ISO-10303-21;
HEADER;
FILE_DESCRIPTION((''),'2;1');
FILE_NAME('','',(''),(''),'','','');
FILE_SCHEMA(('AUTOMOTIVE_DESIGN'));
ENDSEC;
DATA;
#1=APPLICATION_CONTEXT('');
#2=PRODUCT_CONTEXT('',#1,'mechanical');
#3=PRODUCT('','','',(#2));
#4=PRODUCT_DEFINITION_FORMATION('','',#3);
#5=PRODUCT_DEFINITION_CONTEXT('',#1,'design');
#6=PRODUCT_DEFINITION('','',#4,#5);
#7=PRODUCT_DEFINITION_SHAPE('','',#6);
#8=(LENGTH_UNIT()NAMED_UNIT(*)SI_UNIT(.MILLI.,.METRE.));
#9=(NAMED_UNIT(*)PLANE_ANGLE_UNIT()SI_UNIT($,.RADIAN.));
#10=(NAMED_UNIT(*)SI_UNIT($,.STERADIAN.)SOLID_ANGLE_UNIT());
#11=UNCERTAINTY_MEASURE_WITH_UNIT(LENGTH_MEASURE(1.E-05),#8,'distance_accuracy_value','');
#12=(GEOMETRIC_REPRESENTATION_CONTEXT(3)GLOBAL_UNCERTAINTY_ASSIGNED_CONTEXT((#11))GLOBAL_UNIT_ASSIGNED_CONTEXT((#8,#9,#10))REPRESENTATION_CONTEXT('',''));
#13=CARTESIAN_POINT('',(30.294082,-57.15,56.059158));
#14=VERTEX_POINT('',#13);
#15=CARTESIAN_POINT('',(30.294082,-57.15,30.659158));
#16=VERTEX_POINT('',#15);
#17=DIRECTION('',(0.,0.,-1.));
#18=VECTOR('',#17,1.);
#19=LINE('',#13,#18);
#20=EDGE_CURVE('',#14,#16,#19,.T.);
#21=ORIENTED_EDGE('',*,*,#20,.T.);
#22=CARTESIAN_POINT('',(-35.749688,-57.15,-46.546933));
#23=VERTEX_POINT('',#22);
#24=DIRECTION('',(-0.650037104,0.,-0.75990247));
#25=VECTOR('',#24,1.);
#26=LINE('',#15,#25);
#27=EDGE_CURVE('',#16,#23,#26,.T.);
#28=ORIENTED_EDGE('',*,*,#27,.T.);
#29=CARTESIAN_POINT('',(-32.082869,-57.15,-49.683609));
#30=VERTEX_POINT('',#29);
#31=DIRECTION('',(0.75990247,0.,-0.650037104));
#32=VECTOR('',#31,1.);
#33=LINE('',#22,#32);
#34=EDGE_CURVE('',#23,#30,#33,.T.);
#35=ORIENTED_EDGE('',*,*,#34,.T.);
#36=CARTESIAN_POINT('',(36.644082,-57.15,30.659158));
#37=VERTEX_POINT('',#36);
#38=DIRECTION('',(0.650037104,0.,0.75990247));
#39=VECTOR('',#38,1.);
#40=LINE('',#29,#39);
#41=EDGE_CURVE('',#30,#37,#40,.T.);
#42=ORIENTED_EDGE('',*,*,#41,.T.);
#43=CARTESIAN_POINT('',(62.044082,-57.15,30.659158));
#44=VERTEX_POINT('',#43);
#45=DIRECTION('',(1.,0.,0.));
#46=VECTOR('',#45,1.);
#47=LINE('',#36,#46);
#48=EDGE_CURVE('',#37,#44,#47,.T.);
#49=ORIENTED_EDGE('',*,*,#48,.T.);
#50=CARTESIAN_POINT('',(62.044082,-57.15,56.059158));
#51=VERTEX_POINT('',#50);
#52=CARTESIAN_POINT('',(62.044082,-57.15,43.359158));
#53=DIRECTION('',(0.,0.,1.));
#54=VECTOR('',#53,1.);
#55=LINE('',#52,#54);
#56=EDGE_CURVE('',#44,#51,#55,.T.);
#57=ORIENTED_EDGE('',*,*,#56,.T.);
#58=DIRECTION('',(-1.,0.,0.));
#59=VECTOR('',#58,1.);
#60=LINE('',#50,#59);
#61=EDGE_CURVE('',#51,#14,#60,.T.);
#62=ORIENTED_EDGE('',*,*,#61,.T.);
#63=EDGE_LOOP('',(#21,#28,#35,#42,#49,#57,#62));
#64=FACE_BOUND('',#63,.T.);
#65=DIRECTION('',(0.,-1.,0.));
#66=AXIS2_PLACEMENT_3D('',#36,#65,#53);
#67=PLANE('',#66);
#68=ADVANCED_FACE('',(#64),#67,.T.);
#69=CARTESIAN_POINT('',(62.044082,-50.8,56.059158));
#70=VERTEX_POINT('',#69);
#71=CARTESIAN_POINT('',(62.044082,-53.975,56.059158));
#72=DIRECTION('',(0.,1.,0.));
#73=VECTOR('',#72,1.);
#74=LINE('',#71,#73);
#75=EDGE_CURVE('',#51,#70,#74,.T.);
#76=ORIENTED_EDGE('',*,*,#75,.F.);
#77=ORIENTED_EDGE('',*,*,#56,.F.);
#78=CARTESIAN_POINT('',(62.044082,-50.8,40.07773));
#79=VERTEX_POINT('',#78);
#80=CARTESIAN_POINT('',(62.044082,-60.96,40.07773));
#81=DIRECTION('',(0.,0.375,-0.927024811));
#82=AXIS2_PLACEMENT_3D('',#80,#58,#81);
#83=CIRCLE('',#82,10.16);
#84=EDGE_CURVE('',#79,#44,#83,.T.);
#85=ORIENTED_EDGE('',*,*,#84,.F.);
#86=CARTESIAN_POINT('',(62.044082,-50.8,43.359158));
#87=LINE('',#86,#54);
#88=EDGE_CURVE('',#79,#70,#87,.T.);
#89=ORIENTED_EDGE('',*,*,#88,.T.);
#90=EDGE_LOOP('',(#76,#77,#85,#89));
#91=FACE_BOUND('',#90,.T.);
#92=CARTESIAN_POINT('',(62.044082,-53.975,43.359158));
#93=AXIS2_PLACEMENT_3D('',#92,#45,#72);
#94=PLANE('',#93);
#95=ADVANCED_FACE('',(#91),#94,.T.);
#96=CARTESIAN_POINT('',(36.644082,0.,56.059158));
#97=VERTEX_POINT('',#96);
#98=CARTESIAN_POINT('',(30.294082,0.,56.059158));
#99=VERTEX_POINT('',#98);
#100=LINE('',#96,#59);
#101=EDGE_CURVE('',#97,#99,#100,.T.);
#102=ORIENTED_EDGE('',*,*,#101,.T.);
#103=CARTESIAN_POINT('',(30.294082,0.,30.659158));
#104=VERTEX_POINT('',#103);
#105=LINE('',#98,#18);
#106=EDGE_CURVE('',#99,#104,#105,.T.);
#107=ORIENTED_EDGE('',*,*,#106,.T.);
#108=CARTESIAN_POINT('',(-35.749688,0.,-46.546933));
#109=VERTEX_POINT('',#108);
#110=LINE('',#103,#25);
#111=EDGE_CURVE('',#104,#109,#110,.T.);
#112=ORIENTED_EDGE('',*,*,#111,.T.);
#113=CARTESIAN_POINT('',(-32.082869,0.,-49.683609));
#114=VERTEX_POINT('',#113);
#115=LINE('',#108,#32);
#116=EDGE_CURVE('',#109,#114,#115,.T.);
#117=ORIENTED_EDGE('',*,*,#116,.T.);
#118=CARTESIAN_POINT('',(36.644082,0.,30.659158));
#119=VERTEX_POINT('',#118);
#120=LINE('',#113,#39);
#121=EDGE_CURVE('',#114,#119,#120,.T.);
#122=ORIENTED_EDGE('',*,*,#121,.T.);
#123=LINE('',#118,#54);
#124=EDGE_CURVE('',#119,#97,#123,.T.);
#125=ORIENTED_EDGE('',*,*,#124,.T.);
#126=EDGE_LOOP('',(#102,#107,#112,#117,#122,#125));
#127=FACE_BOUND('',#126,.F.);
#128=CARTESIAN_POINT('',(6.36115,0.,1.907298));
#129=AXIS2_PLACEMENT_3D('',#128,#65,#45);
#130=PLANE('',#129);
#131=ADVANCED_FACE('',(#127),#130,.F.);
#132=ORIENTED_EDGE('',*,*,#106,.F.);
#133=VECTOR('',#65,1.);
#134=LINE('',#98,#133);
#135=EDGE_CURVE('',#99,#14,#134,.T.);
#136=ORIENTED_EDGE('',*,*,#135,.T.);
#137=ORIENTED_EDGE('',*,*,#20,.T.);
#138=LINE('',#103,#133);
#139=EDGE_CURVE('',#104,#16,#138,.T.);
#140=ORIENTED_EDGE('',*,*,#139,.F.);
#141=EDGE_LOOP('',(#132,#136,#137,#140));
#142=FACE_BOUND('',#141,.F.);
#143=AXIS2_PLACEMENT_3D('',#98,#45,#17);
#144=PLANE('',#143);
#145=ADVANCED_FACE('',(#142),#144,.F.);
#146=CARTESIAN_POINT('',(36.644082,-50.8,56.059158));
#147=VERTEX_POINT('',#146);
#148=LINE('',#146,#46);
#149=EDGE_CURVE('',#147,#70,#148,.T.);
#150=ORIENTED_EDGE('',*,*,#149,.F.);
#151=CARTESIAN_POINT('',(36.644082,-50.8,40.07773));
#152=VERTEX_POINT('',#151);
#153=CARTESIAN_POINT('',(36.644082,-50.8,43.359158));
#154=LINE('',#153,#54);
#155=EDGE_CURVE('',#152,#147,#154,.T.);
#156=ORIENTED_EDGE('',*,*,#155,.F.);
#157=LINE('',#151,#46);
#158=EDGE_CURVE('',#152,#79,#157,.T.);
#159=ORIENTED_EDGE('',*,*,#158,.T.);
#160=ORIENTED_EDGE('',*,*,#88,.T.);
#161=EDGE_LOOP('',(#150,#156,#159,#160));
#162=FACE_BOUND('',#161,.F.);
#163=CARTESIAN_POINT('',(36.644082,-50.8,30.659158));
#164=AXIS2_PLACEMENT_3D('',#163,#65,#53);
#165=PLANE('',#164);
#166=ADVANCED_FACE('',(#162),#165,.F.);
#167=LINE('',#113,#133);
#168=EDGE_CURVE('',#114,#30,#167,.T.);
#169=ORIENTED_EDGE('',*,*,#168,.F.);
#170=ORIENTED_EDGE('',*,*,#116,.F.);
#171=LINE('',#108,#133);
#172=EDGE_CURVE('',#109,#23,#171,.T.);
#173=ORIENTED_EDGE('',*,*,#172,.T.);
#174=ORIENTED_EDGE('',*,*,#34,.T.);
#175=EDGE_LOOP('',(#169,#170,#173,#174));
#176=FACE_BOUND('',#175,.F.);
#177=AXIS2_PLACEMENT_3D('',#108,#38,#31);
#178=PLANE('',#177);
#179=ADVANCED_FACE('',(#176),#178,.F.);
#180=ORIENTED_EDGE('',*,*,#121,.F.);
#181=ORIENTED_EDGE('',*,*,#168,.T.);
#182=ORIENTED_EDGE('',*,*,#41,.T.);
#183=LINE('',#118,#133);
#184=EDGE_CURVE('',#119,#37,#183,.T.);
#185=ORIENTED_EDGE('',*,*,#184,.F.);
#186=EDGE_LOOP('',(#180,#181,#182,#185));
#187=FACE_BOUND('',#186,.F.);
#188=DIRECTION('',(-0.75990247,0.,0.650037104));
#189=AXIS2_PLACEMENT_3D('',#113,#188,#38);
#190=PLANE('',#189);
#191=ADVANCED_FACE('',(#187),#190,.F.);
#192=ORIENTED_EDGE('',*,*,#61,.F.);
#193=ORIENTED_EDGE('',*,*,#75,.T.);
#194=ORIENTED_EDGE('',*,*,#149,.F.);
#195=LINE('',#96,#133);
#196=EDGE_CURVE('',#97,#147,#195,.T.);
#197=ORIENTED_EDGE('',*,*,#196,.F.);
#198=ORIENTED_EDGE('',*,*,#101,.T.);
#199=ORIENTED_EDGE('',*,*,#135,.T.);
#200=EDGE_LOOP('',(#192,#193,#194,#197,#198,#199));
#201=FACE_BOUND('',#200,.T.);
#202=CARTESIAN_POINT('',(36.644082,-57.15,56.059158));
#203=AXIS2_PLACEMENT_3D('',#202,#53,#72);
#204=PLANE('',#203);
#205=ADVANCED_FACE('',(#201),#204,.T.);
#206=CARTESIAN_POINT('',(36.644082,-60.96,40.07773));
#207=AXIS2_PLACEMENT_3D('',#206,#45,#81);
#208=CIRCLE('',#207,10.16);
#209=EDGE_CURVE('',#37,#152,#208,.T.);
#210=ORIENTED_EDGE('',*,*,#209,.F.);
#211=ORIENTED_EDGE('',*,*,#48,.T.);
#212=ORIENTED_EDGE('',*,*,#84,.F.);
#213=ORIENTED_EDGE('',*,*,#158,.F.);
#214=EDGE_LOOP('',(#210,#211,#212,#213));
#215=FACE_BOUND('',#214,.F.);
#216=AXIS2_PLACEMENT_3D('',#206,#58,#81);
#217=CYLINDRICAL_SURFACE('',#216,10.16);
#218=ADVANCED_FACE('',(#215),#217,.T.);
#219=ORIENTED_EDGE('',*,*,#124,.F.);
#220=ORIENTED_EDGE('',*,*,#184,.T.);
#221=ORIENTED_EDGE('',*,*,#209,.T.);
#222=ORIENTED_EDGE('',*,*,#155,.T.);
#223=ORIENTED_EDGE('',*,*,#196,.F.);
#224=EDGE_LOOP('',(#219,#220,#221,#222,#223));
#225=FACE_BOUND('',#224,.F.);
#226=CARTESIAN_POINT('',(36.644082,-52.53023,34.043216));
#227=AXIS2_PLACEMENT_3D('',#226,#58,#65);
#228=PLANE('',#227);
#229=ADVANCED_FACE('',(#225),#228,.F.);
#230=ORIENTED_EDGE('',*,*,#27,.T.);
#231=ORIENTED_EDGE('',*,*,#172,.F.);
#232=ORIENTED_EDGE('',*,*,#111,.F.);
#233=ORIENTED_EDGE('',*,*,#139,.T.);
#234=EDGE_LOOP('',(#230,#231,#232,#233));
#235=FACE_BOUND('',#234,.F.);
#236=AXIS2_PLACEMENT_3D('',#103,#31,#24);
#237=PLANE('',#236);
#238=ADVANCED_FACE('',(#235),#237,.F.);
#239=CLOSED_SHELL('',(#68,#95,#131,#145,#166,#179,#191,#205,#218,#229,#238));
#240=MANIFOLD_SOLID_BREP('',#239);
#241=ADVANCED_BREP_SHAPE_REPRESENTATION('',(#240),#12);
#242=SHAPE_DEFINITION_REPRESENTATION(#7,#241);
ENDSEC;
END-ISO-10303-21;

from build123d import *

# Parameters (mm, degrees)
F1_DEPTH    = 57.15
F2_W        = 6.35
F2_H        = 25.4
F3_DEPTH    = 25.4
F4_T1_DEPTH = 48.9464301965


# Not quite as in the source:
# - a fillet or chamfer that OpenCascade refuses, or shapes differently, is made with other operations: its cross-section is extruded or revolved along the edge and cut away or added


with BuildPart() as f1:
    # F0 (on Front) → F1 (new body)
    with BuildSketch(Plane.XZ):
        Polygon((36.6440817745, 56.0591582008), (30.2940817745, 56.0591582008), (30.2940817745, 30.6591582008), (-35.7496880067, -46.5469327059), (-32.0828693102, -49.6836091906), (36.6440817745, 30.6591582008), align=None)
    extrude(amount=F1_DEPTH)

    # F2 (on face) → F3 (join)
    with BuildSketch(Plane.YZ.offset(36.6440817745)):
        with Locations((-53.975, 43.3591582008)):
            Rectangle(F2_W, F2_H)
    extrude(amount=F3_DEPTH)

    # F4: fillet of radius 10.16 on 1 edges, made by hand

    # F4_s2 → F4_t1 (cut)
    with BuildSketch(Plane.YZ.offset(36.6440817745)):
        with BuildLine():
            ThreePointArc((-57.15, 30.6591582008), (-52.5357730325, 34.3981176165), (-50.8, 40.0777302794))
            Line((-50.8, 40.0777302794), (-50.8, 30.6591582008))
            Line((-50.8, 30.6591582008), (-57.15, 30.6591582008))
        make_face()
    extrude(amount=F4_T1_DEPTH, mode=Mode.SUBTRACT)


solid = f1.part
